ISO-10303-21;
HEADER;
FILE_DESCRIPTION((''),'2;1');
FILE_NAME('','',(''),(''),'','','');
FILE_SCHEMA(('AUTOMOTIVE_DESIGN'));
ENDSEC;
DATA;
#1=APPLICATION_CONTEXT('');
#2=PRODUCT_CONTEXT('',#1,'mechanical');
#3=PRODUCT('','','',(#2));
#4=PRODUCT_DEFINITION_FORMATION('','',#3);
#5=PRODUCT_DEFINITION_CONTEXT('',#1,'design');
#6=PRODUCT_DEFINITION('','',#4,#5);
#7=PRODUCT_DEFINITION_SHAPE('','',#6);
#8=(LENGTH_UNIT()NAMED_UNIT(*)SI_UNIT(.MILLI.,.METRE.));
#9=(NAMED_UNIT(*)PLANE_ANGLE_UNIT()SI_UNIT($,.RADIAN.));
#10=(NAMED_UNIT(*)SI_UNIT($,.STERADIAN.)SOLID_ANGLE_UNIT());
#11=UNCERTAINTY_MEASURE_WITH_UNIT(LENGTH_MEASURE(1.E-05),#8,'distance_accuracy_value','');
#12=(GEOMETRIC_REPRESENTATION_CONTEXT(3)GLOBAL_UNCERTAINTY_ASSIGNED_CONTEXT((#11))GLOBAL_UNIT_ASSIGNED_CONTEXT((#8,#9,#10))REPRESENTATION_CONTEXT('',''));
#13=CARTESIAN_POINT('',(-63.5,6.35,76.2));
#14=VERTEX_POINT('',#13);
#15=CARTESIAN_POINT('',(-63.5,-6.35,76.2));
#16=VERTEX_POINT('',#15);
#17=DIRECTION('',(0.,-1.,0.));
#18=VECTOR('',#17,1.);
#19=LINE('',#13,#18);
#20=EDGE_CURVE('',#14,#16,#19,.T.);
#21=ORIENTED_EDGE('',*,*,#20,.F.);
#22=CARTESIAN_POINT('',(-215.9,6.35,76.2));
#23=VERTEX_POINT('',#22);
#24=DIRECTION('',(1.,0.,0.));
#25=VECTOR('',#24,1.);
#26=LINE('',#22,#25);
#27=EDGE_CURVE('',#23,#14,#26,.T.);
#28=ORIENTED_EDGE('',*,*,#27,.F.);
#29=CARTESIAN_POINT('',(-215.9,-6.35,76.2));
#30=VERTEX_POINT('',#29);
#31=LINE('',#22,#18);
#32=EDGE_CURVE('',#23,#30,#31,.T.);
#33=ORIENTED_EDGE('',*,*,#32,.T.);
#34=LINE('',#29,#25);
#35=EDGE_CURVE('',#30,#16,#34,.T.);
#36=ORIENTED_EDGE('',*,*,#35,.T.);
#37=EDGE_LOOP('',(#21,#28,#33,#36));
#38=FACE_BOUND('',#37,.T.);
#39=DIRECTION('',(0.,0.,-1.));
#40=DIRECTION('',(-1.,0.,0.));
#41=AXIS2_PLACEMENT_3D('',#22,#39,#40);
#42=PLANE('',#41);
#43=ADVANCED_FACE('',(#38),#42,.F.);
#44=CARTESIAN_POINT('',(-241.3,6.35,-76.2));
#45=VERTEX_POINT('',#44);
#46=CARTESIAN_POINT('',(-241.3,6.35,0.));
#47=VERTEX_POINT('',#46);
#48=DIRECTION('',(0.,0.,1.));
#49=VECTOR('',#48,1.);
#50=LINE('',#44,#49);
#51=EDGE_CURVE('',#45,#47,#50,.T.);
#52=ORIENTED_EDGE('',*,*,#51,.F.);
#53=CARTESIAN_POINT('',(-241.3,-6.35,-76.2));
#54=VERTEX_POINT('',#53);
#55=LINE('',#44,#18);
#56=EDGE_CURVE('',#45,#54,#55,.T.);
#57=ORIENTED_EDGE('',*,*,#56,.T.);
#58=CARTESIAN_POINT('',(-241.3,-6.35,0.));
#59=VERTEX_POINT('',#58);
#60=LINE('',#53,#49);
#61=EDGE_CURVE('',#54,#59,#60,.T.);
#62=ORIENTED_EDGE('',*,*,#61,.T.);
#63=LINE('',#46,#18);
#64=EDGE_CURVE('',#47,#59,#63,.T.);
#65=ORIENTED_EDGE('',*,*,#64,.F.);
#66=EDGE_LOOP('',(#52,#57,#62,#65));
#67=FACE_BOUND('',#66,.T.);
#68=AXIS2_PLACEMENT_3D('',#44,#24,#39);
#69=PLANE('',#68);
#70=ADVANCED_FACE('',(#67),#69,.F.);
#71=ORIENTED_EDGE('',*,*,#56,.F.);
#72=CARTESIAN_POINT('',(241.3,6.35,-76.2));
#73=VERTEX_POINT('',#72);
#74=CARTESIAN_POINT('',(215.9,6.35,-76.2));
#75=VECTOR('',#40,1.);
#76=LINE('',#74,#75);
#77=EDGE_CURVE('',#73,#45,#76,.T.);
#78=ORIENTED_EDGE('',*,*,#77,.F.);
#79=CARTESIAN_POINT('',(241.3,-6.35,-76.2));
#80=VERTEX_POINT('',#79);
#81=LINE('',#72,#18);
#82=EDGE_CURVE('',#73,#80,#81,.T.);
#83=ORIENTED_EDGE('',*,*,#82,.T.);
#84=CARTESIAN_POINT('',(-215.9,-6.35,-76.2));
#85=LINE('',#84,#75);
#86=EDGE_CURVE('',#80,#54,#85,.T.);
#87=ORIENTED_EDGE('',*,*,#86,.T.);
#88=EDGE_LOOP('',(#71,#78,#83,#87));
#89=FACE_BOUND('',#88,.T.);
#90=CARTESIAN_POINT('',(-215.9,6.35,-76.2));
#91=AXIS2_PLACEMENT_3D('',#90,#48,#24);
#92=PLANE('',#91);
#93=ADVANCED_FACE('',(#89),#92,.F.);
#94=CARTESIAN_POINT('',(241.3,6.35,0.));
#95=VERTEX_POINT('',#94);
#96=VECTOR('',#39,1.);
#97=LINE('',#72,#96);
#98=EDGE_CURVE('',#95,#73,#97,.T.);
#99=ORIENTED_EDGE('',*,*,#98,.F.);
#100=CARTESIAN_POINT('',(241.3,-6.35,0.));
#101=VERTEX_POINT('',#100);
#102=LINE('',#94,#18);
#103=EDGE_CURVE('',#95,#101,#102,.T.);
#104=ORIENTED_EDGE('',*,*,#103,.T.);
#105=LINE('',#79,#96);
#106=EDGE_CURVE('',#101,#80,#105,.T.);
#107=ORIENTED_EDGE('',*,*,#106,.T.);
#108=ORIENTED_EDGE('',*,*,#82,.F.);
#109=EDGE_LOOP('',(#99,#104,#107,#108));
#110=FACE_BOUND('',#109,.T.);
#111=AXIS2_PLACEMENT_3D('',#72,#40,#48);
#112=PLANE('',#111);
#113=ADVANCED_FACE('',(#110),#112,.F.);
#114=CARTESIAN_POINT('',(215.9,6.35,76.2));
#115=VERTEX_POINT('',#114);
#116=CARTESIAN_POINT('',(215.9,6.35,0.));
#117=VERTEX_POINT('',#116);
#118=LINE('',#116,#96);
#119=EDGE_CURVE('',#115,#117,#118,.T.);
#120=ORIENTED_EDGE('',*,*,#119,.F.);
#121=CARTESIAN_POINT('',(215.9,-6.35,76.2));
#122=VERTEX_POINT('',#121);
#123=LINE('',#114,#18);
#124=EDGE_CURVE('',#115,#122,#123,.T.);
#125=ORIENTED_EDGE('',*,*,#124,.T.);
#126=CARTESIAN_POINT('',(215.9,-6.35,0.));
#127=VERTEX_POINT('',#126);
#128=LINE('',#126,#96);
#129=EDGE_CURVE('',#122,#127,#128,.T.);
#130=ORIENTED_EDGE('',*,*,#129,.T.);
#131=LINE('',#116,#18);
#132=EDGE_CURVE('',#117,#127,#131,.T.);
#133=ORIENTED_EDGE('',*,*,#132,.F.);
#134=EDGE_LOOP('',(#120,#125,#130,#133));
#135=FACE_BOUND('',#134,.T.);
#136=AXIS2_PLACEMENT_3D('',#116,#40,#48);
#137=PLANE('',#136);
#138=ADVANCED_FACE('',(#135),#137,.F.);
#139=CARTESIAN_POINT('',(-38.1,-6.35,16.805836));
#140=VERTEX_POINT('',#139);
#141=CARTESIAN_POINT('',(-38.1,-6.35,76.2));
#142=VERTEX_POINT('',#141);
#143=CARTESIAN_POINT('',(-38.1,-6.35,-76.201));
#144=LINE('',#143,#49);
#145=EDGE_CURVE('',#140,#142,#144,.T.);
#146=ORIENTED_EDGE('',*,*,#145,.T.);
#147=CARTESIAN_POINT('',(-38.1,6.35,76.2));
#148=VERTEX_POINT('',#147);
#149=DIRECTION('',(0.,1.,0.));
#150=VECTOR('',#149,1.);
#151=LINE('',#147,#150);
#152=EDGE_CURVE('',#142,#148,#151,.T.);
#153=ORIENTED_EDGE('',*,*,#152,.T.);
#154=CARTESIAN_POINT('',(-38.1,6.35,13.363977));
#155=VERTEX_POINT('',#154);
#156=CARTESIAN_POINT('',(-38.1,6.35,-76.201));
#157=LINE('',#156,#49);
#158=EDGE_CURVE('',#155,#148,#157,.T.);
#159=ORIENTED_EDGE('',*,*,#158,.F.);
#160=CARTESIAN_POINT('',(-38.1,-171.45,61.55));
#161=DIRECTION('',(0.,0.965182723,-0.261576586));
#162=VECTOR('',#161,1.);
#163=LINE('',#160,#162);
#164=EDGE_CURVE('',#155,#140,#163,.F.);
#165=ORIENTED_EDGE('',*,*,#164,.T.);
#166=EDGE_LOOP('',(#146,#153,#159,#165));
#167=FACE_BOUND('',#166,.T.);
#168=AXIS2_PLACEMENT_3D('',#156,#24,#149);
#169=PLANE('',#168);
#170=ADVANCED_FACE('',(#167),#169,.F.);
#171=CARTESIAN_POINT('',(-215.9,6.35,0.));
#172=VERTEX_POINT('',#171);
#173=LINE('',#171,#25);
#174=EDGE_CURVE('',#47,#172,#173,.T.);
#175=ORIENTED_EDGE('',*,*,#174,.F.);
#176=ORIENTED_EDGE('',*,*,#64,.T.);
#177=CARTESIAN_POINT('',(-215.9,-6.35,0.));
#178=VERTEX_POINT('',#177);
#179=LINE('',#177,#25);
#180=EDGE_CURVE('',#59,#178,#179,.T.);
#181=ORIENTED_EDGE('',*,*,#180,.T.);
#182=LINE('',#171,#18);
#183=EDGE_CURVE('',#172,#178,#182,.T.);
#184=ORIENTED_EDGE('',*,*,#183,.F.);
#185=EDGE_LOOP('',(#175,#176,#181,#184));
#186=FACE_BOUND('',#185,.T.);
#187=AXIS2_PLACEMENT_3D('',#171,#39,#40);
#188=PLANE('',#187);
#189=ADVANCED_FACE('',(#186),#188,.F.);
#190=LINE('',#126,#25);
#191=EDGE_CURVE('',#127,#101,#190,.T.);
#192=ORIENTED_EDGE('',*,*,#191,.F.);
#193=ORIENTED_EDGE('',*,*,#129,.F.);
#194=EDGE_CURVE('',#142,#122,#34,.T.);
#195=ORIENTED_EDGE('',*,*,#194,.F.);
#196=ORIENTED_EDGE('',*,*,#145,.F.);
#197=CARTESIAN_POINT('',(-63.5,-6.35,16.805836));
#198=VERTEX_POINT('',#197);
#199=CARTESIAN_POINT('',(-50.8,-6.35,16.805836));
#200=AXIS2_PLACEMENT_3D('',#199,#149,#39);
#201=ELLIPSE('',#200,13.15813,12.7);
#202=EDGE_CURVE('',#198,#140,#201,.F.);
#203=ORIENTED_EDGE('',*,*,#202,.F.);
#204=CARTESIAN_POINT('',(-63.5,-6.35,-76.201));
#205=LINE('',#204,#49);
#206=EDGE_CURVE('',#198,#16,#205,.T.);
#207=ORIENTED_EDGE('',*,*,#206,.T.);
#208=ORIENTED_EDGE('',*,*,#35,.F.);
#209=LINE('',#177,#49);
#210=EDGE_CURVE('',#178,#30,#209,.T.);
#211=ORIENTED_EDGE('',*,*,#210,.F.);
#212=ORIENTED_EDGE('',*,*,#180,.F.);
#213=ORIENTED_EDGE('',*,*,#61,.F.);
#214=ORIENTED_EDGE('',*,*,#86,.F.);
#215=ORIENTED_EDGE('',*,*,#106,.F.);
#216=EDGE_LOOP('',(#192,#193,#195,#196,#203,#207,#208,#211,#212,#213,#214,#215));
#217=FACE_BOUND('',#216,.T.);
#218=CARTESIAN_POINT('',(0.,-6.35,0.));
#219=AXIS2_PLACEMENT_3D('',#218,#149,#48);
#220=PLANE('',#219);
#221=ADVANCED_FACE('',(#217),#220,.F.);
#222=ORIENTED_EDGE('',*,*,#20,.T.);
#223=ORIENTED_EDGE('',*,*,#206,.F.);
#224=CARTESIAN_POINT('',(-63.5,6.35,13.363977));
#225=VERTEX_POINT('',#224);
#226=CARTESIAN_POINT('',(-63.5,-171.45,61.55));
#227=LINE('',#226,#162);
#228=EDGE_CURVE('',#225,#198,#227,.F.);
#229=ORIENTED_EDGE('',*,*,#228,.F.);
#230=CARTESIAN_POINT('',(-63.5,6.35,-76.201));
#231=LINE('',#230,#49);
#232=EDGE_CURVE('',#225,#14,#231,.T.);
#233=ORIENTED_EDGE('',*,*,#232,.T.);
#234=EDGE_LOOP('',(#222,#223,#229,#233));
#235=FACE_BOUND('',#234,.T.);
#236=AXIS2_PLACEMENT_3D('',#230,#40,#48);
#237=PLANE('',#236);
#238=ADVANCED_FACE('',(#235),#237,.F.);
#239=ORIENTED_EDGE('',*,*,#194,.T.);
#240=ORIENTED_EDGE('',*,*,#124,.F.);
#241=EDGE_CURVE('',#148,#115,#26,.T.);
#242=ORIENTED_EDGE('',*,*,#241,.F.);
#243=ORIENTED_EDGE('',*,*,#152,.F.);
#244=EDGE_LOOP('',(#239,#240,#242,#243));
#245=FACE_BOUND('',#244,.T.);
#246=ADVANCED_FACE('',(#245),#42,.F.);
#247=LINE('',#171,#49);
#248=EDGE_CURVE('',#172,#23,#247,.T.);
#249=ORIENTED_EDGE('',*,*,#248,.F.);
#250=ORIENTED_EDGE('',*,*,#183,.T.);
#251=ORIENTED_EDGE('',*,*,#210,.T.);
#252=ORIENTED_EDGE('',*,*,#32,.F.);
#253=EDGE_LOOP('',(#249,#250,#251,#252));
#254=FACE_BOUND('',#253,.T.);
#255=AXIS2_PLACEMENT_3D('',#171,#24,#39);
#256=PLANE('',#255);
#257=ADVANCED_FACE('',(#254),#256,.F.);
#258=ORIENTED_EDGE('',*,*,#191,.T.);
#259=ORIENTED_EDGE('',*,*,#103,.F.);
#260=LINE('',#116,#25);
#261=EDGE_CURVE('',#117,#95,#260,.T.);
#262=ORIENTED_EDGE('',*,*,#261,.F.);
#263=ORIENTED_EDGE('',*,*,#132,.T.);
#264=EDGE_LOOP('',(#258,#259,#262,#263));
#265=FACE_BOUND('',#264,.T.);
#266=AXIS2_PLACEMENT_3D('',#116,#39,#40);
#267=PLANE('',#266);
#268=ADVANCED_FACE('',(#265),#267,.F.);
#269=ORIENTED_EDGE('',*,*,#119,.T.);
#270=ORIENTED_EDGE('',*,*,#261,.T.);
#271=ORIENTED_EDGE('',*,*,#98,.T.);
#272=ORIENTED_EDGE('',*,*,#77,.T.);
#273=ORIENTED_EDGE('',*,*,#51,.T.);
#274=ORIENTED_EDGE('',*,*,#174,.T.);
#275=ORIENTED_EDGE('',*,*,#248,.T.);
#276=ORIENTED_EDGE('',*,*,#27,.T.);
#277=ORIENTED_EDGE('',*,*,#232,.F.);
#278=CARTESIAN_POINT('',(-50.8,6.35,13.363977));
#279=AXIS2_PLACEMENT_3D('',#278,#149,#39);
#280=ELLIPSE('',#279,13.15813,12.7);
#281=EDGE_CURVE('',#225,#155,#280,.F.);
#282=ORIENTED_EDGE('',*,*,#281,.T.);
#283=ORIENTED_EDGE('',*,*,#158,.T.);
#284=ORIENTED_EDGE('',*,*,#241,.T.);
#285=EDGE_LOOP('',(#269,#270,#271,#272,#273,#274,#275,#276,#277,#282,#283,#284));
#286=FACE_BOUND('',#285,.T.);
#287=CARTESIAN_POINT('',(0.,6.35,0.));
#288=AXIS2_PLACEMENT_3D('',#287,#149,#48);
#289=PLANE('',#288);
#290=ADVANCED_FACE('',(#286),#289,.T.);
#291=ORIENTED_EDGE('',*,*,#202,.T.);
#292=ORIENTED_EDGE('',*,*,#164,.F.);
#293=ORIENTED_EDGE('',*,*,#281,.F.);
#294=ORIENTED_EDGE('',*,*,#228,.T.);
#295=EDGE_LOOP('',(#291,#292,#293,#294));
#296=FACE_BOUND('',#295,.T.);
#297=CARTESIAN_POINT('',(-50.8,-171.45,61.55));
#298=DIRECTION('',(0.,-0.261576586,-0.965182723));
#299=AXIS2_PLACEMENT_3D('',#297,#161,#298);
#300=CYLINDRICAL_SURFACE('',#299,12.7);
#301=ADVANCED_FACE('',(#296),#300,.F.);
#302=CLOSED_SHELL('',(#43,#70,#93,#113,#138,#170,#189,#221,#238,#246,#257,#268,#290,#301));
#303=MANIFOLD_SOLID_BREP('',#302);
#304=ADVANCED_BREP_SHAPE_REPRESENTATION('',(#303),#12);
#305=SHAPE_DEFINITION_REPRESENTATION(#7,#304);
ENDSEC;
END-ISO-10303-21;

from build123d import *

# Parameters (mm, degrees)
BOSS_EXTRUDE1_DEPTH     = 6.35
CAVITY1_START           = -13.966782317
CAVITY1_OUTLINE_R       = 12.7
CAVITY1_DEPTH           = 20.041848041
CUT_EXTRUDE2_REACH      = 287.468
CUT_EXTRUDE2_END_RADIUS = 12.7
SKETCH6_W               = 25.4
SKETCH6_H               = 12.7


# Read off the part's stored shape, not the designer's step: Cavity1
with BuildPart() as part:
    # Sketch1 → Boss-Extrude1 (new, symmetric)
    with BuildSketch(Plane(origin=(0, 0, 0), x_dir=(1, 0, 0), z_dir=(0, 1, 0))):
        Polygon((-215.9, 76.2), (215.9, 76.2), (241.3, 76.2), (241.3, 0), (215.9, 0), (215.9, -76.2), (-215.9, -76.2), (-215.9, 0), (-241.3, 0), (-241.3, 76.2), align=None)
    extrude(amount=BOSS_EXTRUDE1_DEPTH, both=True)

    # Cavity1 outline → Cavity1 (cut)
    with BuildSketch(Plane(origin=(0, 0, 0), x_dir=(1, 0, 0), z_dir=(0, 0.9651827234760059, -0.261576585923588)).offset(CAVITY1_START)):
        with Locations((-50.8, -14.559690973)):
            Circle(CAVITY1_OUTLINE_R)
    extrude(amount=CAVITY1_DEPTH, mode=Mode.SUBTRACT)

    # Cut-Extrude2: up to this cylinder (the profile starts outside it)
    cut_extrude2_end = Plane(origin=(-50.8, -15.429678905, 19.266542232), z_dir=(0, 0.965182723476006, -0.2615765859235875)) * Cylinder(CUT_EXTRUDE2_END_RADIUS, 601.336, mode=Mode.PRIVATE)
    # Sketch6 → Cut-Extrude2 (cut, up to the surface)
    with BuildSketch(Plane.XY.offset(76.2), mode=Mode.PRIVATE) as cut_extrude2_sk1:
        with Locations((-50.8, 0)):
            Rectangle(SKETCH6_W, SKETCH6_H)
    cut_extrude2_tool1 = extrude(cut_extrude2_sk1.sketch, amount=-CUT_EXTRUDE2_REACH, mode=Mode.PRIVATE) - cut_extrude2_end
    add(cut_extrude2_tool1.solids().sort_by_distance((-50.8, 0, 76.2))[0], mode=Mode.SUBTRACT)


solid = part.part
